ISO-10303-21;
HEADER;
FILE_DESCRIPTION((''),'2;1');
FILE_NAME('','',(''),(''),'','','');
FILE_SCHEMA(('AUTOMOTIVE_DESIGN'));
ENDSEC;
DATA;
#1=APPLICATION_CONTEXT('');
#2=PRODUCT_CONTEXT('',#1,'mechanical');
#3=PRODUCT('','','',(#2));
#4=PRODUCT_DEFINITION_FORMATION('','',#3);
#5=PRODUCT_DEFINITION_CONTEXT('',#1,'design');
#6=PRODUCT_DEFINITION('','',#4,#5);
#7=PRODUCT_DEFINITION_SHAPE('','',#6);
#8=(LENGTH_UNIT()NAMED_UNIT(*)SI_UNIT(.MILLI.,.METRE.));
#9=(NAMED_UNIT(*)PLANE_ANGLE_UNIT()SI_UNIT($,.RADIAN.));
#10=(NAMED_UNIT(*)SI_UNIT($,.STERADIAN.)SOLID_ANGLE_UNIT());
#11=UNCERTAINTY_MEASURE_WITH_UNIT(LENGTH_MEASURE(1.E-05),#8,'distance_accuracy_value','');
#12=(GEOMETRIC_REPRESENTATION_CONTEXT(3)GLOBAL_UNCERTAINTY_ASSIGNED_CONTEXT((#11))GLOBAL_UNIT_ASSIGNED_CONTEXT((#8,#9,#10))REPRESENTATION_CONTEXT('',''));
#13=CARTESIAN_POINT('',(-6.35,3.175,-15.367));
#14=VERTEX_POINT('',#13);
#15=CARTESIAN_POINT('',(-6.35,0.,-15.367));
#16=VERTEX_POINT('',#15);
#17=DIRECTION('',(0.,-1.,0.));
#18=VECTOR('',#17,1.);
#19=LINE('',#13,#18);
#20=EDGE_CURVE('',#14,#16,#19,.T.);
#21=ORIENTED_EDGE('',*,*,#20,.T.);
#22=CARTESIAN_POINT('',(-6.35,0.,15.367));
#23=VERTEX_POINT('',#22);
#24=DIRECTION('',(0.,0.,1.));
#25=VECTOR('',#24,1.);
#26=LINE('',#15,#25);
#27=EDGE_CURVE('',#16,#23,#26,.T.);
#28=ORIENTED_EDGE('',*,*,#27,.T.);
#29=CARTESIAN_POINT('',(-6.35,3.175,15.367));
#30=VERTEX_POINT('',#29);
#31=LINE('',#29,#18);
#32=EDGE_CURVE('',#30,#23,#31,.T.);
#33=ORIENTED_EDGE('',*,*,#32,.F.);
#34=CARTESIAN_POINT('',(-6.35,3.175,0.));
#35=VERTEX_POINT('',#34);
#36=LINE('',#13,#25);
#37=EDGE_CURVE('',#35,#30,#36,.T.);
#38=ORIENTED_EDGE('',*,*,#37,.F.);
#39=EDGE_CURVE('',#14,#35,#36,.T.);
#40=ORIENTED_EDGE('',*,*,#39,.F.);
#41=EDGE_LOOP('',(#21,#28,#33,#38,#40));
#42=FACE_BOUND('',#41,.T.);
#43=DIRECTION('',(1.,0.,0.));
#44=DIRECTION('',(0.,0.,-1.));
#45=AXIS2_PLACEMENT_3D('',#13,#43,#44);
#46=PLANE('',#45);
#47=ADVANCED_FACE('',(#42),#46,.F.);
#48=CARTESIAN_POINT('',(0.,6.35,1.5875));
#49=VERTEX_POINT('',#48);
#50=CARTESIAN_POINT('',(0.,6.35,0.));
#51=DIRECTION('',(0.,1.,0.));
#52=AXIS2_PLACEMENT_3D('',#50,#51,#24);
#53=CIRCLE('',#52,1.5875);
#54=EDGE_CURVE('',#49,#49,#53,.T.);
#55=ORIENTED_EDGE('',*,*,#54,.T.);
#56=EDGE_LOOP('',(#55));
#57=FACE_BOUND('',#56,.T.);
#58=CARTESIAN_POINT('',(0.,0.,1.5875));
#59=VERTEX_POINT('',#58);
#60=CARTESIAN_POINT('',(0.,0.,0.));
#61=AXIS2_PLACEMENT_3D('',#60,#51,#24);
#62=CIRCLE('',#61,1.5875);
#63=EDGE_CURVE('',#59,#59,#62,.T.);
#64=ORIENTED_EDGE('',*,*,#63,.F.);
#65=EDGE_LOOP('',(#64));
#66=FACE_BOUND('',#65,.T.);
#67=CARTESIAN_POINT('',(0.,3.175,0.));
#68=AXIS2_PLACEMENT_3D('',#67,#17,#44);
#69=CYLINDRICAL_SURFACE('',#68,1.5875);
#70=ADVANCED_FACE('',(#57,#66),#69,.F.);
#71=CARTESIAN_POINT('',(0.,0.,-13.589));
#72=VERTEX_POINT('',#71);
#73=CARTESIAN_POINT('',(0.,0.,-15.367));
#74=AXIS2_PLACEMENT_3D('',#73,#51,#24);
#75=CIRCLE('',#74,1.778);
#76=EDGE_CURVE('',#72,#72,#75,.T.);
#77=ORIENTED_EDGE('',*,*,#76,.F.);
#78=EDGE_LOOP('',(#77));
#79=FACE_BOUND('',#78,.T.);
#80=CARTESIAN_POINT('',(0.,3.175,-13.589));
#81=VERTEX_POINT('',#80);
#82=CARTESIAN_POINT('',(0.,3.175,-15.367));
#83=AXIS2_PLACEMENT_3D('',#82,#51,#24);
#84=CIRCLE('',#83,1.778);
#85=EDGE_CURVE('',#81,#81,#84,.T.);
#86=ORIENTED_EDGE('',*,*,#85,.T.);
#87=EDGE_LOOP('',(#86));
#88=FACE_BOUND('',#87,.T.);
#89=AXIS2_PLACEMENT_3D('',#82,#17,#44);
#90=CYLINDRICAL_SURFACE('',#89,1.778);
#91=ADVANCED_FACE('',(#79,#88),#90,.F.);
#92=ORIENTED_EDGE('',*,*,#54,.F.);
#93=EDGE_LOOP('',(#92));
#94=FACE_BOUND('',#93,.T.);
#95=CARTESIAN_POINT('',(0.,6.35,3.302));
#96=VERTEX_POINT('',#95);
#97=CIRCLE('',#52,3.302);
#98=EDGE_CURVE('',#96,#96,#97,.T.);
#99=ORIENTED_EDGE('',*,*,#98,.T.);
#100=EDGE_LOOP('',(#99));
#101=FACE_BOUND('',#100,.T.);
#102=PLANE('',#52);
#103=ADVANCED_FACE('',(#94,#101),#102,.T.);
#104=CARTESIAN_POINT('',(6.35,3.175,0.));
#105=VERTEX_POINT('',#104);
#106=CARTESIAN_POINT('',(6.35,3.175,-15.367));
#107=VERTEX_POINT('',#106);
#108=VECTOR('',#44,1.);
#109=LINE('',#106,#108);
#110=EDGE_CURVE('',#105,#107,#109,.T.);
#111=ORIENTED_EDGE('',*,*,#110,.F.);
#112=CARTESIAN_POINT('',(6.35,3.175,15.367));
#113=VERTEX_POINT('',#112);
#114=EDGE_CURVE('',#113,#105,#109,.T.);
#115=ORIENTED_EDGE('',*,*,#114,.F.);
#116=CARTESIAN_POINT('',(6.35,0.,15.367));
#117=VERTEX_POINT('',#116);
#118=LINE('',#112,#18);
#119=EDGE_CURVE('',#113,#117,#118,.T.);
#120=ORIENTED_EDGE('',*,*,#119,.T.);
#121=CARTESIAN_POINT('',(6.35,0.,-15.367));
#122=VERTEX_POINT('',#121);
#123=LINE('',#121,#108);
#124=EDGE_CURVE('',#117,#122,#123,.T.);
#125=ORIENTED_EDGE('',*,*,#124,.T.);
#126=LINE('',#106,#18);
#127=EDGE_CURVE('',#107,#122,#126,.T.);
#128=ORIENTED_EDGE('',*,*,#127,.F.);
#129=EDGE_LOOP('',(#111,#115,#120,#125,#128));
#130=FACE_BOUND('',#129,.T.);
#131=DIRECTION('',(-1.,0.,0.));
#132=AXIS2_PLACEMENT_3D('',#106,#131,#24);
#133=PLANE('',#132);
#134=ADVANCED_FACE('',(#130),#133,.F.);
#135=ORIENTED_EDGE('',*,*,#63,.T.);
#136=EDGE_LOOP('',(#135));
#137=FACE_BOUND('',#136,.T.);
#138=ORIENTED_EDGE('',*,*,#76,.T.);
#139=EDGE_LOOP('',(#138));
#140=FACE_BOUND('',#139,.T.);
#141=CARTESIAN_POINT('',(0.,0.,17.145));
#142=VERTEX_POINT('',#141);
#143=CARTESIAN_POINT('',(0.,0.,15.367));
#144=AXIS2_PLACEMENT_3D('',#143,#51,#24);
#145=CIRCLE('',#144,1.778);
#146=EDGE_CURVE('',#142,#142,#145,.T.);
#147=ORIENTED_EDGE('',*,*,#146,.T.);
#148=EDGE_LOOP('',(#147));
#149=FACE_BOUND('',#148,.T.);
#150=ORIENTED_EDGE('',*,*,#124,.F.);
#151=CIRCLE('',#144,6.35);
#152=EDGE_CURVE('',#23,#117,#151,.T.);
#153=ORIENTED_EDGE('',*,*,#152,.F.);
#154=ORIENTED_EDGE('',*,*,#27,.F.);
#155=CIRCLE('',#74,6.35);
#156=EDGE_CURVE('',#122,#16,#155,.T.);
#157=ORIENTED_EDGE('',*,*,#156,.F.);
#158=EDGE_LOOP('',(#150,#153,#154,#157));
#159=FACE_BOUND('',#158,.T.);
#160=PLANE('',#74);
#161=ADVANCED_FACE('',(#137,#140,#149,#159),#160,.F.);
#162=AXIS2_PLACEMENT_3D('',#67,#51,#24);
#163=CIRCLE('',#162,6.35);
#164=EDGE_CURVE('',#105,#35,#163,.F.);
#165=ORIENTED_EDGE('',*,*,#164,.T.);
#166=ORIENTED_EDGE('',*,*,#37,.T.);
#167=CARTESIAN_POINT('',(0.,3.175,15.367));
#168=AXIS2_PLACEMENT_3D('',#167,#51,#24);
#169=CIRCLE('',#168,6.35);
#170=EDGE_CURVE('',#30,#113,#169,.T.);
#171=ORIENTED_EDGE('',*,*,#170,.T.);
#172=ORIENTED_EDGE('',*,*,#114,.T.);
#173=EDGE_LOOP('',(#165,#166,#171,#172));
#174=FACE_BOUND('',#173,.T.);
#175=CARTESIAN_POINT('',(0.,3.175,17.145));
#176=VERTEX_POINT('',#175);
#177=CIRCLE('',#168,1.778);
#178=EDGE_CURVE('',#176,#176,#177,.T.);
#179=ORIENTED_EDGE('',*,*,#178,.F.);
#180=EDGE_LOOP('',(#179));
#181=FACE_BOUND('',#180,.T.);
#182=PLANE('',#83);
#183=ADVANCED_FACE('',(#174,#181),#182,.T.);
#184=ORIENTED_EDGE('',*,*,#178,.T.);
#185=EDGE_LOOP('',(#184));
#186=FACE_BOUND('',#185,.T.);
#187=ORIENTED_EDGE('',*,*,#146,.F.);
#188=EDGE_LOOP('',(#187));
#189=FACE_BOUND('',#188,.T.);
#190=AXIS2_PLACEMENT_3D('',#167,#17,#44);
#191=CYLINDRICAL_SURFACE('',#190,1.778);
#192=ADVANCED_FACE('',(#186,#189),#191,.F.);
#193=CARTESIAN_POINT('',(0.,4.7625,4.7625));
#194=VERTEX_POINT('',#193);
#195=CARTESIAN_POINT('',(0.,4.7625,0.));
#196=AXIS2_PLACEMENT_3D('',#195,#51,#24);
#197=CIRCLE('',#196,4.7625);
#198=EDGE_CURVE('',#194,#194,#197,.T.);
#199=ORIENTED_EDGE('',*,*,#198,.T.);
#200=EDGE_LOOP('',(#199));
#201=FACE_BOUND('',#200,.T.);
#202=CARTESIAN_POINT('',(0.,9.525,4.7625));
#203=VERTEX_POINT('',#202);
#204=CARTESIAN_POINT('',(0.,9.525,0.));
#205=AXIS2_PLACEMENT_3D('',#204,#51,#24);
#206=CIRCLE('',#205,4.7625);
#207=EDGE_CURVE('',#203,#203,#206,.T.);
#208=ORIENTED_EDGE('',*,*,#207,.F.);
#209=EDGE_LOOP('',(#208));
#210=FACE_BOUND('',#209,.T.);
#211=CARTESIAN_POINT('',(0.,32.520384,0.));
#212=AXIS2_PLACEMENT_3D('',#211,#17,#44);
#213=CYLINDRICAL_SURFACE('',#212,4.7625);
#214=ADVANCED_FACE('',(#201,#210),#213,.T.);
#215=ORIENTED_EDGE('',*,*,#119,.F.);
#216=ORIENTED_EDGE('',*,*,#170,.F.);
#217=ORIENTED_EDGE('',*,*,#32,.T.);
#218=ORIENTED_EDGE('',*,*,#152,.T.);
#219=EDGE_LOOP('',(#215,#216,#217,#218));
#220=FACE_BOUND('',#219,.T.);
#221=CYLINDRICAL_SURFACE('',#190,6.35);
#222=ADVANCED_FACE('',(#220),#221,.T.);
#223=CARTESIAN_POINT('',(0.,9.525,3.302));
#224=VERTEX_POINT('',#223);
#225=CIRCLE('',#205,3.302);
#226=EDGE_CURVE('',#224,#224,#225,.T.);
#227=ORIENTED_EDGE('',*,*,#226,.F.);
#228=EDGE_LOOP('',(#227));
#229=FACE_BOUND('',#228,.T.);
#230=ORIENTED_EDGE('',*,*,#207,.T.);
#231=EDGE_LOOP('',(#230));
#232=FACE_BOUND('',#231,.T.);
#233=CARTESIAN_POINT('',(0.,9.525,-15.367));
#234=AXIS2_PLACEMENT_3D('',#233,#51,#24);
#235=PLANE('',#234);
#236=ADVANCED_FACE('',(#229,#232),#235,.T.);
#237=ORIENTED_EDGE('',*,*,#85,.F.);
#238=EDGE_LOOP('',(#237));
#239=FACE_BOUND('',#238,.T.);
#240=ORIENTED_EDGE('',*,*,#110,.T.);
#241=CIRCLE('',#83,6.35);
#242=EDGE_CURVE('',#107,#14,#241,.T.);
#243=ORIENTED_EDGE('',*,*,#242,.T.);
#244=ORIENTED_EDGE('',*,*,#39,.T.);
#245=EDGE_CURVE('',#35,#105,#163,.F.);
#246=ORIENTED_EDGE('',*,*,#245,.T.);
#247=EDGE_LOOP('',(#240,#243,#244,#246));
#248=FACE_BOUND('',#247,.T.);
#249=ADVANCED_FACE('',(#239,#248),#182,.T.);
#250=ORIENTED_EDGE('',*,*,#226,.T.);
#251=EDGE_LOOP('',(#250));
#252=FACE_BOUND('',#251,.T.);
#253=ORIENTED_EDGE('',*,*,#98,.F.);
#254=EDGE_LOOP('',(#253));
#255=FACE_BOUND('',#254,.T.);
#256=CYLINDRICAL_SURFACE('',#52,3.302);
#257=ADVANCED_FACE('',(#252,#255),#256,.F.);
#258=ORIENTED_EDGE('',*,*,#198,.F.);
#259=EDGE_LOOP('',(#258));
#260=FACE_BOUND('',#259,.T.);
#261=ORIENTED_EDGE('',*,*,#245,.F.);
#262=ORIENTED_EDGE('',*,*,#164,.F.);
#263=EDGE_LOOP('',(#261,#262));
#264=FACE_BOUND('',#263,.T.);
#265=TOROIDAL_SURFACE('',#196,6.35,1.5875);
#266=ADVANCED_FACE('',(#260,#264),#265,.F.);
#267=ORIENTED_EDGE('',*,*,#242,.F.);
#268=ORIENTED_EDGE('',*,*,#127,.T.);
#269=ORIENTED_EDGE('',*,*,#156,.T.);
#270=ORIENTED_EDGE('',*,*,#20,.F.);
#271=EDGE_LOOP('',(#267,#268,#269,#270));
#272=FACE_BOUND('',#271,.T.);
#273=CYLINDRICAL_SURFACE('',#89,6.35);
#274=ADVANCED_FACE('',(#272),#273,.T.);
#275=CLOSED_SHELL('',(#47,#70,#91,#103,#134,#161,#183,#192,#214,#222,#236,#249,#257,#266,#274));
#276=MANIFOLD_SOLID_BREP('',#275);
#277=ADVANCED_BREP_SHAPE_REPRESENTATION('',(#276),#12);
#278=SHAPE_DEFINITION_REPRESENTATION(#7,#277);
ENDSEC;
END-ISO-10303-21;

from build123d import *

# Parameters (mm, degrees)
SKETCH1_R           = 1.778
SKETCH1_R_2         = 1.5875
BOSS_EXTRUDE1_DEPTH = 3.175
SKETCH2_R           = 4.7625
SKETCH2_R_2         = 1.5875
BOSS_EXTRUDE2_DEPTH = 6.35
SKETCH3_R           = 3.302
CUT_EXTRUDE1_DEPTH  = 3.175
FILLET1_R           = 1.5875


with BuildPart() as part:
    # Sketch1 → Boss-Extrude1 (new body)
    with BuildSketch(Plane(origin=(0, 0, 0), x_dir=(1, 0, 0), z_dir=(0, 1, 0))):
        with BuildLine():
            Line((6.35, 15.367), (6.35, -15.367))
            ThreePointArc((6.35, -15.367), (0, -21.717), (-6.35, -15.367))
            Line((-6.35, -15.367), (-6.35, 15.367))
            ThreePointArc((-6.35, 15.367), (0, 21.717), (6.35, 15.367))
        make_face()
        with Locations(Location((0, 15.367, 0), (0, 0, 270))):
            Circle(SKETCH1_R, mode=Mode.SUBTRACT)
        with Locations(Location((0, -15.367, 0), (0, 0, 270))):
            Circle(SKETCH1_R, mode=Mode.SUBTRACT)
        with Locations(Location((0, 0, 0), (0, 0, 270))):
            Circle(SKETCH1_R_2, mode=Mode.SUBTRACT)
    extrude(amount=BOSS_EXTRUDE1_DEPTH)

    # Sketch2 → Boss-Extrude2 (add)
    with BuildSketch(Plane(origin=(0, 3.175, 0), x_dir=(1, 0, 0), z_dir=(0, 1, 0))):
        with Locations(Location((0, 0, 0), (0, 0, 270))):
            Circle(SKETCH2_R)
        with Locations(Location((0, 0, 0), (0, 0, 270))):
            Circle(SKETCH2_R_2, mode=Mode.SUBTRACT)
    extrude(amount=BOSS_EXTRUDE2_DEPTH)

    # Sketch3 → Cut-Extrude1 (cut)
    with BuildSketch(Plane(origin=(0, 9.525, 0), x_dir=(1, 0, 0), z_dir=(0, 1, 0))):
        with Locations(Location((0, 0, 0), (0, 0, 270))):
            Circle(SKETCH3_R)
    extrude(amount=-CUT_EXTRUDE1_DEPTH, mode=Mode.SUBTRACT)

    # Fillet1
    fillet1_edges = [part.edges().sort_by_distance(p)[0] for p in [
        (0, 3.175, -4.7625),
    ]]
    fillet(fillet1_edges, radius=FILLET1_R - 0.0001)  # a hair under: the kernel refuses the full size


solid = part.part
